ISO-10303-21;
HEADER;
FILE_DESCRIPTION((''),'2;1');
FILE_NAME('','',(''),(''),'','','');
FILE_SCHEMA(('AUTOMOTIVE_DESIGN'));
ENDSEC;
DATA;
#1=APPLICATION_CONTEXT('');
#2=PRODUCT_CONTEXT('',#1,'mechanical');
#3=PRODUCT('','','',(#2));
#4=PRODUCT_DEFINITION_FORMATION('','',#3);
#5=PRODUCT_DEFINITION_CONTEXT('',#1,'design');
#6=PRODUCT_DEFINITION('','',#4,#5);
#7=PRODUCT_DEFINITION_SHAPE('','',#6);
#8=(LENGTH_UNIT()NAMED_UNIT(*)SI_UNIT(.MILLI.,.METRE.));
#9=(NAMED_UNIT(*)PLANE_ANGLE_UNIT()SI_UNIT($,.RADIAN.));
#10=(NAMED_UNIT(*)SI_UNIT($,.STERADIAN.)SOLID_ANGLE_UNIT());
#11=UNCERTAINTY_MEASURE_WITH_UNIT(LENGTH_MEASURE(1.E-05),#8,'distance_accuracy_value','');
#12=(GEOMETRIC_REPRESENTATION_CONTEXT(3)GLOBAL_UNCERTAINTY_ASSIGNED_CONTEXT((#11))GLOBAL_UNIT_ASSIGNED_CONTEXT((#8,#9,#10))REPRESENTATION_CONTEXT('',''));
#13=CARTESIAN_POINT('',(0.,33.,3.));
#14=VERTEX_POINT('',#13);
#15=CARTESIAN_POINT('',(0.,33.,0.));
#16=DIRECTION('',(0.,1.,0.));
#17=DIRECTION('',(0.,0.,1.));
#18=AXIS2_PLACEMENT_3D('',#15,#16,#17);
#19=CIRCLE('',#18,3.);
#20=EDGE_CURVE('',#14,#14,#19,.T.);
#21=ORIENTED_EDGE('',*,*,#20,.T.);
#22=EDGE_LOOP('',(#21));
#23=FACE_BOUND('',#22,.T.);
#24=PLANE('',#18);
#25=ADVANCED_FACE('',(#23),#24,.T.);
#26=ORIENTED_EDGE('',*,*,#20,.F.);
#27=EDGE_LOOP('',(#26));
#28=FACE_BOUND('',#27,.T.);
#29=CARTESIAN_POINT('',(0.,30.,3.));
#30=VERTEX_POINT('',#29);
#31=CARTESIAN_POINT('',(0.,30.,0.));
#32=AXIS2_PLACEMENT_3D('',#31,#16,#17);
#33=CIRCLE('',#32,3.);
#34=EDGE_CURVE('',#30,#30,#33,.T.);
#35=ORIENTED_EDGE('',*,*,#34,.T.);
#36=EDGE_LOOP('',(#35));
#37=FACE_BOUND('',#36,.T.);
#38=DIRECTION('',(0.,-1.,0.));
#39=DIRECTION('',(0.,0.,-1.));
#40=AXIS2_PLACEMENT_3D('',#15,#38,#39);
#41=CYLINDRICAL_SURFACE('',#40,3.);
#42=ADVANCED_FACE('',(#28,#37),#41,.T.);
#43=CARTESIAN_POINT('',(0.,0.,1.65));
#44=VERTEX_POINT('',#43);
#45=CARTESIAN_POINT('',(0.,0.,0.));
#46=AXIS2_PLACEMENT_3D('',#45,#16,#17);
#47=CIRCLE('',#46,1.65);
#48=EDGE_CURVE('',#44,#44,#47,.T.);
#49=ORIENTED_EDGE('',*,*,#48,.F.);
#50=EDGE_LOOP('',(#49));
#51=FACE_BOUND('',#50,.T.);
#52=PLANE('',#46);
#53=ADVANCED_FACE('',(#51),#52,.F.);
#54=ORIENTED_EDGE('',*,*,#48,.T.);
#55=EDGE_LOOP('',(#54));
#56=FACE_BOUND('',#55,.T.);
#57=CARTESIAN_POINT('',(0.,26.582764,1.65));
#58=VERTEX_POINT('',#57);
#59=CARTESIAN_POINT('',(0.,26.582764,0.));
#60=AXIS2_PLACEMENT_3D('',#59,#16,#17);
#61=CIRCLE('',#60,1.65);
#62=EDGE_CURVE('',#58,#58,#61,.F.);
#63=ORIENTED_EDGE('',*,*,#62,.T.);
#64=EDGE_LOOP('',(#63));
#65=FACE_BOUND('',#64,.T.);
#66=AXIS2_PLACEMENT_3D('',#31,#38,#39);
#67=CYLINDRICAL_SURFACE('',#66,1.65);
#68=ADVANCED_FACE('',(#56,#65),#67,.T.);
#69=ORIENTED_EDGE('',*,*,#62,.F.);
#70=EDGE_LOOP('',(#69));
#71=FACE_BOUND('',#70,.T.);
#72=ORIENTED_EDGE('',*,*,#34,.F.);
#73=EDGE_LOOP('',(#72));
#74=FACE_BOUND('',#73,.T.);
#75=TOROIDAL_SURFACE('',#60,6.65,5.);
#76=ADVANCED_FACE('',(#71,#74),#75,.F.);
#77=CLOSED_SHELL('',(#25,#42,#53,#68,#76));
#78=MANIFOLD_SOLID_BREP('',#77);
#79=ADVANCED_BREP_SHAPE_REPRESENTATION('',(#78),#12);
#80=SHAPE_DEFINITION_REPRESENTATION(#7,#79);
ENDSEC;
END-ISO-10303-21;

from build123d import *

# Parameters (mm, degrees)
SKETCH1_R           = 1.65
BOSS_EXTRUDE1_DEPTH = 30
SKETCH2_R           = 3
BOSS_EXTRUDE2_DEPTH = 3
FILLET1_R           = 5


with BuildPart() as part:
    # Sketch1 → Boss-Extrude1 (new body)
    with BuildSketch(Plane(origin=(0, 0, 0), x_dir=(1, 0, 0), z_dir=(0, 1, 0))):
        with Locations(Location((0, 0, 0), (0, 0, 270))):
            Circle(SKETCH1_R)
    extrude(amount=BOSS_EXTRUDE1_DEPTH)

    # Sketch2 → Boss-Extrude2 (add)
    with BuildSketch(Plane(origin=(0, 30, 0), x_dir=(1, 0, 0), z_dir=(0, 1, 0))):
        with Locations(Location((0, 0, 0), (0, 0, 270))):
            Circle(SKETCH2_R)
    extrude(amount=BOSS_EXTRUDE2_DEPTH)

    # Fillet1
    # the kernel refuses this fillet: 5 mm, written as the material it adds along each edge
    with BuildSketch(Plane(origin=(0, 30, 0), x_dir=(0, 0, 1), z_dir=(-1, 0, 0))) as fillet1_piece_1:
        with BuildLine():
            CenterArc((6.65, -3.417235725), FILLET1_R, 136.886394054, 43.113605946)
            Line((1.65, -3.417235725), (1.55, -3.417235725))
            Line((1.55, -3.417235725), (1.55, 0))
            Line((1.55, 0), (1.65, 0.1))
            ThreePointArc((1.65, 0.1), (2.325, 0.1), (2.927, 0.068344714))
            Line((2.927, 0.068344714), (3, 0))
        make_face()
    revolve(axis=Axis((0, 30, 0), (0, 1, 0)))


solid = part.part
